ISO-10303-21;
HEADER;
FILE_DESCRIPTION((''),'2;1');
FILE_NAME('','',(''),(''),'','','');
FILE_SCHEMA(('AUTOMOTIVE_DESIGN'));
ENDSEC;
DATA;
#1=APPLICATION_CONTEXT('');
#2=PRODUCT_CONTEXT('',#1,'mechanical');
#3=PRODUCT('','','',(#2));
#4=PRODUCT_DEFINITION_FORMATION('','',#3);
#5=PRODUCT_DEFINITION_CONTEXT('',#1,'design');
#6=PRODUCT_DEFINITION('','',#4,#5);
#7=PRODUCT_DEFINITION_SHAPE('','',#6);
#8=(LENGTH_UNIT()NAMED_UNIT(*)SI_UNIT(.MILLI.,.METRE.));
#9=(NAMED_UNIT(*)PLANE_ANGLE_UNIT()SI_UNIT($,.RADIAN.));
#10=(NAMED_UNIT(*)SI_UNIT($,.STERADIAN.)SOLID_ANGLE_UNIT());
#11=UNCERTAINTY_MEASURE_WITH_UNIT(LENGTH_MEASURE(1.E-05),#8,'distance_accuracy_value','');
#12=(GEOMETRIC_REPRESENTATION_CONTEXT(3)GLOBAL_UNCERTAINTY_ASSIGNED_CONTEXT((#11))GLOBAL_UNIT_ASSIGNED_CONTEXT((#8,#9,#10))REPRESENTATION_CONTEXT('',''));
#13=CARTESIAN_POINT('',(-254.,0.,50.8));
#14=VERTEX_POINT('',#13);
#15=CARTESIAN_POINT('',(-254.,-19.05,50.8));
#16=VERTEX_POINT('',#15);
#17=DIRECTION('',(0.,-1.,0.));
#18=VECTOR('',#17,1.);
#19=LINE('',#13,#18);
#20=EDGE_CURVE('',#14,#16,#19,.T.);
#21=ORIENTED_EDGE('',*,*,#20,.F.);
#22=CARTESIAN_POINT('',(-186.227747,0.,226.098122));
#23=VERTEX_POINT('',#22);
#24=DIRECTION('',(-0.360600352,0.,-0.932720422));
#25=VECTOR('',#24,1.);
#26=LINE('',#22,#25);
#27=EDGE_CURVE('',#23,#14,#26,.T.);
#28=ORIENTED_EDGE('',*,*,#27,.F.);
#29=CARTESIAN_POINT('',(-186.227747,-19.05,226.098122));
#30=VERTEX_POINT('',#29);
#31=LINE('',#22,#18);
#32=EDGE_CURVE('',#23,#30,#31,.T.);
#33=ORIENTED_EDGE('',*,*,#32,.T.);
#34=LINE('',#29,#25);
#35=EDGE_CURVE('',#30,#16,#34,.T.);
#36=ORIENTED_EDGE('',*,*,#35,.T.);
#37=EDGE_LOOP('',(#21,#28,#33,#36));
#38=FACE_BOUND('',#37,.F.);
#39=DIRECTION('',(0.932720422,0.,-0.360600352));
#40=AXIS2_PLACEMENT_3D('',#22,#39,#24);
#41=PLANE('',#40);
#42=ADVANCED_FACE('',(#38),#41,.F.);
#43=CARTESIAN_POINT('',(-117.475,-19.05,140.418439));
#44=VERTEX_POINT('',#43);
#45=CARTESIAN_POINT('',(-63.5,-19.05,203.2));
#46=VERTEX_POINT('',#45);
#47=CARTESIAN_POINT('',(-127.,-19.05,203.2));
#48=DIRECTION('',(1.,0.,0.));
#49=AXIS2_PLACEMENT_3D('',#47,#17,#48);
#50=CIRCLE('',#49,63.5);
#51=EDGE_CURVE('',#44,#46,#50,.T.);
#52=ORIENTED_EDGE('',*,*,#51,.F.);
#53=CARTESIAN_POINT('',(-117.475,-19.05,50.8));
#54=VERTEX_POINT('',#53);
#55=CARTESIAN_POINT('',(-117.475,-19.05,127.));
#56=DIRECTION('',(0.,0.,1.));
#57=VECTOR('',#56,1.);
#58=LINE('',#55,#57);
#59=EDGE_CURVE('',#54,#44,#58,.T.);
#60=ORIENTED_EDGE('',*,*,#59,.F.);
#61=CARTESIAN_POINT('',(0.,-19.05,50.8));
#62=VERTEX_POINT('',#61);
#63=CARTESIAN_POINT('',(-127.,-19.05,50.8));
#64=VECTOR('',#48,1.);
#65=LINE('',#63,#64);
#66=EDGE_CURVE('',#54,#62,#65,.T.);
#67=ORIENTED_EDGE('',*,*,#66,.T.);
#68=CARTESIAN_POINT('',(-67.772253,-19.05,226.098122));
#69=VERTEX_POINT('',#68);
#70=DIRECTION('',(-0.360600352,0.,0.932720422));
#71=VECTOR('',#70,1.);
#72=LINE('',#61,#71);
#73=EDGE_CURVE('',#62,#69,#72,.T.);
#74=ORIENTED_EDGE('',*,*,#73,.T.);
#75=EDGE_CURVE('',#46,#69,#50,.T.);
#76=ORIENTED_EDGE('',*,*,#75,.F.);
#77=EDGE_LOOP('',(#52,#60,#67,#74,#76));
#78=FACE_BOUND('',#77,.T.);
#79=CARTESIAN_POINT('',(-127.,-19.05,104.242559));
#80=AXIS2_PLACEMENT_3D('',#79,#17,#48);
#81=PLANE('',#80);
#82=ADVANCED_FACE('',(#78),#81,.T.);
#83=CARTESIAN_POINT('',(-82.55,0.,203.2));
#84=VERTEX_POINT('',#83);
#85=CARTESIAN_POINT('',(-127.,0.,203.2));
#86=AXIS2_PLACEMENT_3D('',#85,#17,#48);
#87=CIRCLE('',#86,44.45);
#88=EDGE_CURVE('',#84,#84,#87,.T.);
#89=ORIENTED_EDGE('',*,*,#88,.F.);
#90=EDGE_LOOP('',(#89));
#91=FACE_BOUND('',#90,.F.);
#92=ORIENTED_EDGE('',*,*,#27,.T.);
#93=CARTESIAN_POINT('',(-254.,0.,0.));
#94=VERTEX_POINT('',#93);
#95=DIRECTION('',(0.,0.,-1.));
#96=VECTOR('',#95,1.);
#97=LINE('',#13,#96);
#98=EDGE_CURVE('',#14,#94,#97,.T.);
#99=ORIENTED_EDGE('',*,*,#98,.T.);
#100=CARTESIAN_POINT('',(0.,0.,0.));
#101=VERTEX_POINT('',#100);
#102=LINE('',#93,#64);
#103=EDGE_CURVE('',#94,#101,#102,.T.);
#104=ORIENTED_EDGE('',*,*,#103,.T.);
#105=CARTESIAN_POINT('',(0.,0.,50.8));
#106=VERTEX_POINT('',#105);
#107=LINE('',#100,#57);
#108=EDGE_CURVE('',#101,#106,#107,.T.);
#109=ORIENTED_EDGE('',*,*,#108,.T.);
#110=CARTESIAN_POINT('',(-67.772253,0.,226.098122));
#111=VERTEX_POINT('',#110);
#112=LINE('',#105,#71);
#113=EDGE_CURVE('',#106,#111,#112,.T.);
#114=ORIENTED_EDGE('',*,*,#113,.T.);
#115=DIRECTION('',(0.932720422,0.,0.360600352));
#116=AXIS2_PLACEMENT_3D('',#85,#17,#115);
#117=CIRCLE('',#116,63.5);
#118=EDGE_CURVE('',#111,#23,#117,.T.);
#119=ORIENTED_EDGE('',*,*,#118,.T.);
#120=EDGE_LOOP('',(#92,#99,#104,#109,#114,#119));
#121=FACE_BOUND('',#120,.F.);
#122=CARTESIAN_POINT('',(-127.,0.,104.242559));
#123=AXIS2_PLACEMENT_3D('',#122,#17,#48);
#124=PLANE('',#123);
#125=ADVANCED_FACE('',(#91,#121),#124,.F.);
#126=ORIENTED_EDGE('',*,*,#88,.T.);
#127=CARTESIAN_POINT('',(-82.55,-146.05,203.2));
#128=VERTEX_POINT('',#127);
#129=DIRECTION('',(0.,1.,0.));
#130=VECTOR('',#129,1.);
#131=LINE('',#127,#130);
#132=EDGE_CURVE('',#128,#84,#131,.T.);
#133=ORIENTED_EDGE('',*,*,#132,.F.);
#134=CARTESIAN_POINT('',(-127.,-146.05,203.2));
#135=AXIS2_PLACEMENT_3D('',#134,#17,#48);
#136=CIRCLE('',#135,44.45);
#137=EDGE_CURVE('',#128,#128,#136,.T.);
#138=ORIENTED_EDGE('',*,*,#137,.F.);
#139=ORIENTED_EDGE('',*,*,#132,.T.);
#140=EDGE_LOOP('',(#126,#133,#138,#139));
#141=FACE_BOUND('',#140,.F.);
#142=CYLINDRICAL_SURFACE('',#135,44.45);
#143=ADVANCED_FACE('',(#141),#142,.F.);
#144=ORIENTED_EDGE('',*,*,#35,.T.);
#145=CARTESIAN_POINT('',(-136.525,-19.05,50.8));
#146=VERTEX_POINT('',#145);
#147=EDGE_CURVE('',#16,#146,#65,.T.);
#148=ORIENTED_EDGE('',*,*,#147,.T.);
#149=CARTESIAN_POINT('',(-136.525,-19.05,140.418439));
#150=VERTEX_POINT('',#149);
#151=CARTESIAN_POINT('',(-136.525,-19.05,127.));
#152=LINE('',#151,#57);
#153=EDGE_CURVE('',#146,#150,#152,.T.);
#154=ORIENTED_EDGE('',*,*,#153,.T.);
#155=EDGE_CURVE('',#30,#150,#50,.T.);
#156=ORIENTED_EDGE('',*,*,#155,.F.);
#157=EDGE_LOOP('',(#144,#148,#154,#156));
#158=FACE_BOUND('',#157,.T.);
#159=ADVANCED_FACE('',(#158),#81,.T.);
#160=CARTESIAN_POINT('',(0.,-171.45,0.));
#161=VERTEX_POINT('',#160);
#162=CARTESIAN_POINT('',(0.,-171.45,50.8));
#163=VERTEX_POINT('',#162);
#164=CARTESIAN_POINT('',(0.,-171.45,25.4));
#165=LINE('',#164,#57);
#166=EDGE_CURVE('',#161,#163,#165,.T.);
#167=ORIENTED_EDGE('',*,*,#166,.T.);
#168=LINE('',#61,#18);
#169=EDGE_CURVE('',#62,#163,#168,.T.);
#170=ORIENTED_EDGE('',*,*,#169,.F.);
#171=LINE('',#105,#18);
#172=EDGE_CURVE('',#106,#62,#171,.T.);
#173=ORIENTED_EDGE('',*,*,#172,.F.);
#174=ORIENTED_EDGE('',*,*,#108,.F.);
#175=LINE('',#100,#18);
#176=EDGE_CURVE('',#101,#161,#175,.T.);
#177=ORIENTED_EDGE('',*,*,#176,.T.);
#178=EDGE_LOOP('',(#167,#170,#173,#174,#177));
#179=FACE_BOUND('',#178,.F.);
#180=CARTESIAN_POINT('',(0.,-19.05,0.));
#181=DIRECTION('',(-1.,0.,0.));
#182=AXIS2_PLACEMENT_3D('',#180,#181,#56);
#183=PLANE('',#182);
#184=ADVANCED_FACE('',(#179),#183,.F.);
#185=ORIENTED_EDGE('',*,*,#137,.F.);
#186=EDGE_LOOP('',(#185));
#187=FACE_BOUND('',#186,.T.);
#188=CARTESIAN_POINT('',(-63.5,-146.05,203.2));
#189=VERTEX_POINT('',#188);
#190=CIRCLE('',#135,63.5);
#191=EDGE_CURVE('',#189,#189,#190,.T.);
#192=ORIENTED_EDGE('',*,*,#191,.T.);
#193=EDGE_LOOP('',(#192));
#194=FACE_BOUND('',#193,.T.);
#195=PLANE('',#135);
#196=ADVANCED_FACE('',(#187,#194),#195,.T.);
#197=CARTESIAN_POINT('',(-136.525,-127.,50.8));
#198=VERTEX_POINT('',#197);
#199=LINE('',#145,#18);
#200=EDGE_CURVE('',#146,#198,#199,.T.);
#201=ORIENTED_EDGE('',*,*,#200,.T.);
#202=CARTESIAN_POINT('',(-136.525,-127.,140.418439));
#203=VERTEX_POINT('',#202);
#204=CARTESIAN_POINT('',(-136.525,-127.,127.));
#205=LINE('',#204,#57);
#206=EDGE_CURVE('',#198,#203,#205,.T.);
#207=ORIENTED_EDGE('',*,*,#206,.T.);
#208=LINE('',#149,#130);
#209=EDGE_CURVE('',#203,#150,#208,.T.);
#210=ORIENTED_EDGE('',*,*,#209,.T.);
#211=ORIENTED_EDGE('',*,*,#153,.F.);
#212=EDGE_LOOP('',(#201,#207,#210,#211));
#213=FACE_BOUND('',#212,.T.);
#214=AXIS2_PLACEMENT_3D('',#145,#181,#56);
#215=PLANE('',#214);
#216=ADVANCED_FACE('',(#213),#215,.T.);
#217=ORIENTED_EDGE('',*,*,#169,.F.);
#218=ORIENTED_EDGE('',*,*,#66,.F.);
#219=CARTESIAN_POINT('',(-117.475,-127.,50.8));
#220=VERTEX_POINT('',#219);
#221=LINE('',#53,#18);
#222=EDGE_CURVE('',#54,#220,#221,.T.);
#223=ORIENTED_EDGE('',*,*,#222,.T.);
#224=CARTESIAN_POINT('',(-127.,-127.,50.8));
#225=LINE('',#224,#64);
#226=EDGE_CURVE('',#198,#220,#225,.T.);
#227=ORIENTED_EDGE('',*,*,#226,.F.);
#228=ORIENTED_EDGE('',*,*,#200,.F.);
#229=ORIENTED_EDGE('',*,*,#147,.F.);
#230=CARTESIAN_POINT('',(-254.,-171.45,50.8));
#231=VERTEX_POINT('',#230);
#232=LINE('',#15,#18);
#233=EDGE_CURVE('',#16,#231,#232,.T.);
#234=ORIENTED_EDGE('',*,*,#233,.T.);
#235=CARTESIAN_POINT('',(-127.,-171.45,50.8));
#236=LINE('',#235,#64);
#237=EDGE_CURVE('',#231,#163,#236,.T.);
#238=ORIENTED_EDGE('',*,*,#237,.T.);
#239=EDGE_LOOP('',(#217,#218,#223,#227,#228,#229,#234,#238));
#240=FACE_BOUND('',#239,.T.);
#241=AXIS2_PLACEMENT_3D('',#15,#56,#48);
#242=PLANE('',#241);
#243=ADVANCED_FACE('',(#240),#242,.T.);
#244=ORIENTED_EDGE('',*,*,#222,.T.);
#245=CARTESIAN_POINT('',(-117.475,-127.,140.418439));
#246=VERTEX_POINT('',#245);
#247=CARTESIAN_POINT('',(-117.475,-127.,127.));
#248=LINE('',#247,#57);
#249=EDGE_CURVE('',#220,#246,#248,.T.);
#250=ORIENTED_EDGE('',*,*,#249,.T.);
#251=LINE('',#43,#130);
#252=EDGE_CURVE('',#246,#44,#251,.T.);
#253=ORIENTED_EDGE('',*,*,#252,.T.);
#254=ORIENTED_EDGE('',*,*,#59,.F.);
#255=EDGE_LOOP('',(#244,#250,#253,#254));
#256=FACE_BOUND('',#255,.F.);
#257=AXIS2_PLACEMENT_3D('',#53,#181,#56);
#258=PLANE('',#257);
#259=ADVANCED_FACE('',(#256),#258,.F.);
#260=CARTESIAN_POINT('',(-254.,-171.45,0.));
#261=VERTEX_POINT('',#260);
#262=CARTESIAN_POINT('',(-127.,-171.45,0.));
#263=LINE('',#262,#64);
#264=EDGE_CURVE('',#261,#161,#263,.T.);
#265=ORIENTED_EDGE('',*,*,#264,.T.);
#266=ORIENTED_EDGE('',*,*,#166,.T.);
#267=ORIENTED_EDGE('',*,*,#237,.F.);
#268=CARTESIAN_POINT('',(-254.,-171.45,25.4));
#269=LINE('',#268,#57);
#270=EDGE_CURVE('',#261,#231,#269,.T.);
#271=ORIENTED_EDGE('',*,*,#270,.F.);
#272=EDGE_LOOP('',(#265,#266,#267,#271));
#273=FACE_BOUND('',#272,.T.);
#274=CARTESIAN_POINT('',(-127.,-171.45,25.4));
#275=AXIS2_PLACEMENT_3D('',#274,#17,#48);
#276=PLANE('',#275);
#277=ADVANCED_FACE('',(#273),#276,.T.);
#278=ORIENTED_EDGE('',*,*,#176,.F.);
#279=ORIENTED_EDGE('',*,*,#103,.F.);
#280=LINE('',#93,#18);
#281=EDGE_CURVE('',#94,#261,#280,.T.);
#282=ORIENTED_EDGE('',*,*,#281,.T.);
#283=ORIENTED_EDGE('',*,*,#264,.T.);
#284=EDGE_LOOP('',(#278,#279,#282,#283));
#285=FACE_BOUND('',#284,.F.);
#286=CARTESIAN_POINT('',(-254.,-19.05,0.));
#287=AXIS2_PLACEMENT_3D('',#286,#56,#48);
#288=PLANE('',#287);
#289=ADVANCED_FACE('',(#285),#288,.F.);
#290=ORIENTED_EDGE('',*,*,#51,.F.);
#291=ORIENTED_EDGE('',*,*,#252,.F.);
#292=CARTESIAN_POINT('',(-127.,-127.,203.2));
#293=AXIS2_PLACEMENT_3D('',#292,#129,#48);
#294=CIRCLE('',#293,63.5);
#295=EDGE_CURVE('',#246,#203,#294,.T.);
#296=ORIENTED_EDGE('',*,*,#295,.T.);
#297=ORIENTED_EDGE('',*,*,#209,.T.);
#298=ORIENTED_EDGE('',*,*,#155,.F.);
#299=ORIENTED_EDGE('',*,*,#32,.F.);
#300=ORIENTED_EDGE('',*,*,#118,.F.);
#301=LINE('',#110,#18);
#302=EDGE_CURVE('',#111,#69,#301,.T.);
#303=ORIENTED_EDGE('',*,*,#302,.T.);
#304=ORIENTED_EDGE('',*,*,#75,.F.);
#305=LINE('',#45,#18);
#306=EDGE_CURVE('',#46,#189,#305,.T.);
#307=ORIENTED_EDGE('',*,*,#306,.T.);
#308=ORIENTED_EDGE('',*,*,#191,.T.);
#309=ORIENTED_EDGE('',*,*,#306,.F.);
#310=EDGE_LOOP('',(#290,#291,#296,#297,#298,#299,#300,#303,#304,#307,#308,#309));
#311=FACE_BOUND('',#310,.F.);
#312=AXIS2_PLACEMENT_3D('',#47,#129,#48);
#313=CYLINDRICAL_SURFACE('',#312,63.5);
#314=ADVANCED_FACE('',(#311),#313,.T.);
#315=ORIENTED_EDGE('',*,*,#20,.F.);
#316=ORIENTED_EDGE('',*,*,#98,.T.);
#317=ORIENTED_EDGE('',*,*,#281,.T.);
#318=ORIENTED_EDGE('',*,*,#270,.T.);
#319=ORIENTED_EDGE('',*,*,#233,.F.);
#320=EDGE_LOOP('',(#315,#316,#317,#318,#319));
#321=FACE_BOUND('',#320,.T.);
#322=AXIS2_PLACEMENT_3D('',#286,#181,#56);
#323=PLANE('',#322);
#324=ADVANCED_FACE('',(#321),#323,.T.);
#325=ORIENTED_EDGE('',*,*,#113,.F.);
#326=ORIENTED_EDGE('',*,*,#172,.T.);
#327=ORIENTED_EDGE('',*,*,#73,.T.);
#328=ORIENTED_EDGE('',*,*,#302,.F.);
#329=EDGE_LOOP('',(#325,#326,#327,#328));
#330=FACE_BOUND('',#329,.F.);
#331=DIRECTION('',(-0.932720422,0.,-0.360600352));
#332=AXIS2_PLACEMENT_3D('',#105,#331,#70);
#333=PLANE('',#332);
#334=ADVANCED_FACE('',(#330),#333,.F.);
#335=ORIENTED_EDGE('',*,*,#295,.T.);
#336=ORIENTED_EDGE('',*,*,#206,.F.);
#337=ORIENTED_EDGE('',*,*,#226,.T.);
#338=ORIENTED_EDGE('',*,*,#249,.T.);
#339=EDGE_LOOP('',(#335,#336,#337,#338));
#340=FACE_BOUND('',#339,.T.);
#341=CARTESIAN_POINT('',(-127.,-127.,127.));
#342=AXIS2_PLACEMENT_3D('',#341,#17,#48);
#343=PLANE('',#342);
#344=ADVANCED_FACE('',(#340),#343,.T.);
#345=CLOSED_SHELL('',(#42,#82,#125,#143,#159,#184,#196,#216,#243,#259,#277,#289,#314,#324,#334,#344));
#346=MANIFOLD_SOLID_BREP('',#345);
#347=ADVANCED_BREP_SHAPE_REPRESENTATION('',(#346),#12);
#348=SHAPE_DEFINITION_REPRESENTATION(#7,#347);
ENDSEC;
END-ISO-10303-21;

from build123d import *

# Parameters (mm, degrees)
F2_DEPTH  = 19.05
F3_W      = 254
F3_H      = 50.8
F4_DEPTH  = 152.4
F5_W      = 19.05
F5_H      = 152.4
F6_DEPTH  = 107.95
F7_R      = 63.5
F8_DEPTH  = 127
F9_R      = 44.45
F10_DEPTH = 146.051


# Not quite as in the source:
# - a variable given as a bare number and used for a length is read in inches; the dataset says mm whatever the document's units were


with BuildPart() as f2:
    # F1 (on Front) → F2 (new body)
    with BuildSketch(Plane.XZ):
        with BuildLine():
            Line((-254, 0), (0, 0))
            Line((0, 0), (0, 50.8))
            Line((0, 50.8), (-67.7722531834, 226.0981223472))
            ThreePointArc((-67.7722531834, 226.0981223472), (-127, 266.7), (-186.2277468166, 226.0981223472))
            Line((-186.2277468166, 226.0981223472), (-254, 50.8))
            Line((-254, 50.8), (-254, 0))
        make_face()
    extrude(amount=F2_DEPTH)

    # F3 (on face) → F4 (join)
    with BuildSketch(Plane.XZ.offset(19.05)):
        with Locations((-127, 25.4)):
            Rectangle(F3_W, F3_H)
    extrude(amount=F4_DEPTH)

    # F5 (on face) → F6 (join)
    with BuildSketch(Plane.XZ.offset(19.05)):
        with Locations((-127, 127)):
            Rectangle(F5_W, F5_H)
    extrude(amount=F6_DEPTH)

    # F7 (on face) → F8 (join)
    with BuildSketch(Plane.XZ.offset(19.05)):
        with Locations((-127, 203.2)):
            Circle(F7_R)
    extrude(amount=F8_DEPTH)

    # F9 (on face) → F10 (cut, through all)
    with BuildSketch(Plane.XZ.offset(146.05)):
        with Locations((-127, 203.2)):
            Circle(F9_R)
    extrude(amount=-F10_DEPTH, mode=Mode.SUBTRACT)


solid = f2.part
